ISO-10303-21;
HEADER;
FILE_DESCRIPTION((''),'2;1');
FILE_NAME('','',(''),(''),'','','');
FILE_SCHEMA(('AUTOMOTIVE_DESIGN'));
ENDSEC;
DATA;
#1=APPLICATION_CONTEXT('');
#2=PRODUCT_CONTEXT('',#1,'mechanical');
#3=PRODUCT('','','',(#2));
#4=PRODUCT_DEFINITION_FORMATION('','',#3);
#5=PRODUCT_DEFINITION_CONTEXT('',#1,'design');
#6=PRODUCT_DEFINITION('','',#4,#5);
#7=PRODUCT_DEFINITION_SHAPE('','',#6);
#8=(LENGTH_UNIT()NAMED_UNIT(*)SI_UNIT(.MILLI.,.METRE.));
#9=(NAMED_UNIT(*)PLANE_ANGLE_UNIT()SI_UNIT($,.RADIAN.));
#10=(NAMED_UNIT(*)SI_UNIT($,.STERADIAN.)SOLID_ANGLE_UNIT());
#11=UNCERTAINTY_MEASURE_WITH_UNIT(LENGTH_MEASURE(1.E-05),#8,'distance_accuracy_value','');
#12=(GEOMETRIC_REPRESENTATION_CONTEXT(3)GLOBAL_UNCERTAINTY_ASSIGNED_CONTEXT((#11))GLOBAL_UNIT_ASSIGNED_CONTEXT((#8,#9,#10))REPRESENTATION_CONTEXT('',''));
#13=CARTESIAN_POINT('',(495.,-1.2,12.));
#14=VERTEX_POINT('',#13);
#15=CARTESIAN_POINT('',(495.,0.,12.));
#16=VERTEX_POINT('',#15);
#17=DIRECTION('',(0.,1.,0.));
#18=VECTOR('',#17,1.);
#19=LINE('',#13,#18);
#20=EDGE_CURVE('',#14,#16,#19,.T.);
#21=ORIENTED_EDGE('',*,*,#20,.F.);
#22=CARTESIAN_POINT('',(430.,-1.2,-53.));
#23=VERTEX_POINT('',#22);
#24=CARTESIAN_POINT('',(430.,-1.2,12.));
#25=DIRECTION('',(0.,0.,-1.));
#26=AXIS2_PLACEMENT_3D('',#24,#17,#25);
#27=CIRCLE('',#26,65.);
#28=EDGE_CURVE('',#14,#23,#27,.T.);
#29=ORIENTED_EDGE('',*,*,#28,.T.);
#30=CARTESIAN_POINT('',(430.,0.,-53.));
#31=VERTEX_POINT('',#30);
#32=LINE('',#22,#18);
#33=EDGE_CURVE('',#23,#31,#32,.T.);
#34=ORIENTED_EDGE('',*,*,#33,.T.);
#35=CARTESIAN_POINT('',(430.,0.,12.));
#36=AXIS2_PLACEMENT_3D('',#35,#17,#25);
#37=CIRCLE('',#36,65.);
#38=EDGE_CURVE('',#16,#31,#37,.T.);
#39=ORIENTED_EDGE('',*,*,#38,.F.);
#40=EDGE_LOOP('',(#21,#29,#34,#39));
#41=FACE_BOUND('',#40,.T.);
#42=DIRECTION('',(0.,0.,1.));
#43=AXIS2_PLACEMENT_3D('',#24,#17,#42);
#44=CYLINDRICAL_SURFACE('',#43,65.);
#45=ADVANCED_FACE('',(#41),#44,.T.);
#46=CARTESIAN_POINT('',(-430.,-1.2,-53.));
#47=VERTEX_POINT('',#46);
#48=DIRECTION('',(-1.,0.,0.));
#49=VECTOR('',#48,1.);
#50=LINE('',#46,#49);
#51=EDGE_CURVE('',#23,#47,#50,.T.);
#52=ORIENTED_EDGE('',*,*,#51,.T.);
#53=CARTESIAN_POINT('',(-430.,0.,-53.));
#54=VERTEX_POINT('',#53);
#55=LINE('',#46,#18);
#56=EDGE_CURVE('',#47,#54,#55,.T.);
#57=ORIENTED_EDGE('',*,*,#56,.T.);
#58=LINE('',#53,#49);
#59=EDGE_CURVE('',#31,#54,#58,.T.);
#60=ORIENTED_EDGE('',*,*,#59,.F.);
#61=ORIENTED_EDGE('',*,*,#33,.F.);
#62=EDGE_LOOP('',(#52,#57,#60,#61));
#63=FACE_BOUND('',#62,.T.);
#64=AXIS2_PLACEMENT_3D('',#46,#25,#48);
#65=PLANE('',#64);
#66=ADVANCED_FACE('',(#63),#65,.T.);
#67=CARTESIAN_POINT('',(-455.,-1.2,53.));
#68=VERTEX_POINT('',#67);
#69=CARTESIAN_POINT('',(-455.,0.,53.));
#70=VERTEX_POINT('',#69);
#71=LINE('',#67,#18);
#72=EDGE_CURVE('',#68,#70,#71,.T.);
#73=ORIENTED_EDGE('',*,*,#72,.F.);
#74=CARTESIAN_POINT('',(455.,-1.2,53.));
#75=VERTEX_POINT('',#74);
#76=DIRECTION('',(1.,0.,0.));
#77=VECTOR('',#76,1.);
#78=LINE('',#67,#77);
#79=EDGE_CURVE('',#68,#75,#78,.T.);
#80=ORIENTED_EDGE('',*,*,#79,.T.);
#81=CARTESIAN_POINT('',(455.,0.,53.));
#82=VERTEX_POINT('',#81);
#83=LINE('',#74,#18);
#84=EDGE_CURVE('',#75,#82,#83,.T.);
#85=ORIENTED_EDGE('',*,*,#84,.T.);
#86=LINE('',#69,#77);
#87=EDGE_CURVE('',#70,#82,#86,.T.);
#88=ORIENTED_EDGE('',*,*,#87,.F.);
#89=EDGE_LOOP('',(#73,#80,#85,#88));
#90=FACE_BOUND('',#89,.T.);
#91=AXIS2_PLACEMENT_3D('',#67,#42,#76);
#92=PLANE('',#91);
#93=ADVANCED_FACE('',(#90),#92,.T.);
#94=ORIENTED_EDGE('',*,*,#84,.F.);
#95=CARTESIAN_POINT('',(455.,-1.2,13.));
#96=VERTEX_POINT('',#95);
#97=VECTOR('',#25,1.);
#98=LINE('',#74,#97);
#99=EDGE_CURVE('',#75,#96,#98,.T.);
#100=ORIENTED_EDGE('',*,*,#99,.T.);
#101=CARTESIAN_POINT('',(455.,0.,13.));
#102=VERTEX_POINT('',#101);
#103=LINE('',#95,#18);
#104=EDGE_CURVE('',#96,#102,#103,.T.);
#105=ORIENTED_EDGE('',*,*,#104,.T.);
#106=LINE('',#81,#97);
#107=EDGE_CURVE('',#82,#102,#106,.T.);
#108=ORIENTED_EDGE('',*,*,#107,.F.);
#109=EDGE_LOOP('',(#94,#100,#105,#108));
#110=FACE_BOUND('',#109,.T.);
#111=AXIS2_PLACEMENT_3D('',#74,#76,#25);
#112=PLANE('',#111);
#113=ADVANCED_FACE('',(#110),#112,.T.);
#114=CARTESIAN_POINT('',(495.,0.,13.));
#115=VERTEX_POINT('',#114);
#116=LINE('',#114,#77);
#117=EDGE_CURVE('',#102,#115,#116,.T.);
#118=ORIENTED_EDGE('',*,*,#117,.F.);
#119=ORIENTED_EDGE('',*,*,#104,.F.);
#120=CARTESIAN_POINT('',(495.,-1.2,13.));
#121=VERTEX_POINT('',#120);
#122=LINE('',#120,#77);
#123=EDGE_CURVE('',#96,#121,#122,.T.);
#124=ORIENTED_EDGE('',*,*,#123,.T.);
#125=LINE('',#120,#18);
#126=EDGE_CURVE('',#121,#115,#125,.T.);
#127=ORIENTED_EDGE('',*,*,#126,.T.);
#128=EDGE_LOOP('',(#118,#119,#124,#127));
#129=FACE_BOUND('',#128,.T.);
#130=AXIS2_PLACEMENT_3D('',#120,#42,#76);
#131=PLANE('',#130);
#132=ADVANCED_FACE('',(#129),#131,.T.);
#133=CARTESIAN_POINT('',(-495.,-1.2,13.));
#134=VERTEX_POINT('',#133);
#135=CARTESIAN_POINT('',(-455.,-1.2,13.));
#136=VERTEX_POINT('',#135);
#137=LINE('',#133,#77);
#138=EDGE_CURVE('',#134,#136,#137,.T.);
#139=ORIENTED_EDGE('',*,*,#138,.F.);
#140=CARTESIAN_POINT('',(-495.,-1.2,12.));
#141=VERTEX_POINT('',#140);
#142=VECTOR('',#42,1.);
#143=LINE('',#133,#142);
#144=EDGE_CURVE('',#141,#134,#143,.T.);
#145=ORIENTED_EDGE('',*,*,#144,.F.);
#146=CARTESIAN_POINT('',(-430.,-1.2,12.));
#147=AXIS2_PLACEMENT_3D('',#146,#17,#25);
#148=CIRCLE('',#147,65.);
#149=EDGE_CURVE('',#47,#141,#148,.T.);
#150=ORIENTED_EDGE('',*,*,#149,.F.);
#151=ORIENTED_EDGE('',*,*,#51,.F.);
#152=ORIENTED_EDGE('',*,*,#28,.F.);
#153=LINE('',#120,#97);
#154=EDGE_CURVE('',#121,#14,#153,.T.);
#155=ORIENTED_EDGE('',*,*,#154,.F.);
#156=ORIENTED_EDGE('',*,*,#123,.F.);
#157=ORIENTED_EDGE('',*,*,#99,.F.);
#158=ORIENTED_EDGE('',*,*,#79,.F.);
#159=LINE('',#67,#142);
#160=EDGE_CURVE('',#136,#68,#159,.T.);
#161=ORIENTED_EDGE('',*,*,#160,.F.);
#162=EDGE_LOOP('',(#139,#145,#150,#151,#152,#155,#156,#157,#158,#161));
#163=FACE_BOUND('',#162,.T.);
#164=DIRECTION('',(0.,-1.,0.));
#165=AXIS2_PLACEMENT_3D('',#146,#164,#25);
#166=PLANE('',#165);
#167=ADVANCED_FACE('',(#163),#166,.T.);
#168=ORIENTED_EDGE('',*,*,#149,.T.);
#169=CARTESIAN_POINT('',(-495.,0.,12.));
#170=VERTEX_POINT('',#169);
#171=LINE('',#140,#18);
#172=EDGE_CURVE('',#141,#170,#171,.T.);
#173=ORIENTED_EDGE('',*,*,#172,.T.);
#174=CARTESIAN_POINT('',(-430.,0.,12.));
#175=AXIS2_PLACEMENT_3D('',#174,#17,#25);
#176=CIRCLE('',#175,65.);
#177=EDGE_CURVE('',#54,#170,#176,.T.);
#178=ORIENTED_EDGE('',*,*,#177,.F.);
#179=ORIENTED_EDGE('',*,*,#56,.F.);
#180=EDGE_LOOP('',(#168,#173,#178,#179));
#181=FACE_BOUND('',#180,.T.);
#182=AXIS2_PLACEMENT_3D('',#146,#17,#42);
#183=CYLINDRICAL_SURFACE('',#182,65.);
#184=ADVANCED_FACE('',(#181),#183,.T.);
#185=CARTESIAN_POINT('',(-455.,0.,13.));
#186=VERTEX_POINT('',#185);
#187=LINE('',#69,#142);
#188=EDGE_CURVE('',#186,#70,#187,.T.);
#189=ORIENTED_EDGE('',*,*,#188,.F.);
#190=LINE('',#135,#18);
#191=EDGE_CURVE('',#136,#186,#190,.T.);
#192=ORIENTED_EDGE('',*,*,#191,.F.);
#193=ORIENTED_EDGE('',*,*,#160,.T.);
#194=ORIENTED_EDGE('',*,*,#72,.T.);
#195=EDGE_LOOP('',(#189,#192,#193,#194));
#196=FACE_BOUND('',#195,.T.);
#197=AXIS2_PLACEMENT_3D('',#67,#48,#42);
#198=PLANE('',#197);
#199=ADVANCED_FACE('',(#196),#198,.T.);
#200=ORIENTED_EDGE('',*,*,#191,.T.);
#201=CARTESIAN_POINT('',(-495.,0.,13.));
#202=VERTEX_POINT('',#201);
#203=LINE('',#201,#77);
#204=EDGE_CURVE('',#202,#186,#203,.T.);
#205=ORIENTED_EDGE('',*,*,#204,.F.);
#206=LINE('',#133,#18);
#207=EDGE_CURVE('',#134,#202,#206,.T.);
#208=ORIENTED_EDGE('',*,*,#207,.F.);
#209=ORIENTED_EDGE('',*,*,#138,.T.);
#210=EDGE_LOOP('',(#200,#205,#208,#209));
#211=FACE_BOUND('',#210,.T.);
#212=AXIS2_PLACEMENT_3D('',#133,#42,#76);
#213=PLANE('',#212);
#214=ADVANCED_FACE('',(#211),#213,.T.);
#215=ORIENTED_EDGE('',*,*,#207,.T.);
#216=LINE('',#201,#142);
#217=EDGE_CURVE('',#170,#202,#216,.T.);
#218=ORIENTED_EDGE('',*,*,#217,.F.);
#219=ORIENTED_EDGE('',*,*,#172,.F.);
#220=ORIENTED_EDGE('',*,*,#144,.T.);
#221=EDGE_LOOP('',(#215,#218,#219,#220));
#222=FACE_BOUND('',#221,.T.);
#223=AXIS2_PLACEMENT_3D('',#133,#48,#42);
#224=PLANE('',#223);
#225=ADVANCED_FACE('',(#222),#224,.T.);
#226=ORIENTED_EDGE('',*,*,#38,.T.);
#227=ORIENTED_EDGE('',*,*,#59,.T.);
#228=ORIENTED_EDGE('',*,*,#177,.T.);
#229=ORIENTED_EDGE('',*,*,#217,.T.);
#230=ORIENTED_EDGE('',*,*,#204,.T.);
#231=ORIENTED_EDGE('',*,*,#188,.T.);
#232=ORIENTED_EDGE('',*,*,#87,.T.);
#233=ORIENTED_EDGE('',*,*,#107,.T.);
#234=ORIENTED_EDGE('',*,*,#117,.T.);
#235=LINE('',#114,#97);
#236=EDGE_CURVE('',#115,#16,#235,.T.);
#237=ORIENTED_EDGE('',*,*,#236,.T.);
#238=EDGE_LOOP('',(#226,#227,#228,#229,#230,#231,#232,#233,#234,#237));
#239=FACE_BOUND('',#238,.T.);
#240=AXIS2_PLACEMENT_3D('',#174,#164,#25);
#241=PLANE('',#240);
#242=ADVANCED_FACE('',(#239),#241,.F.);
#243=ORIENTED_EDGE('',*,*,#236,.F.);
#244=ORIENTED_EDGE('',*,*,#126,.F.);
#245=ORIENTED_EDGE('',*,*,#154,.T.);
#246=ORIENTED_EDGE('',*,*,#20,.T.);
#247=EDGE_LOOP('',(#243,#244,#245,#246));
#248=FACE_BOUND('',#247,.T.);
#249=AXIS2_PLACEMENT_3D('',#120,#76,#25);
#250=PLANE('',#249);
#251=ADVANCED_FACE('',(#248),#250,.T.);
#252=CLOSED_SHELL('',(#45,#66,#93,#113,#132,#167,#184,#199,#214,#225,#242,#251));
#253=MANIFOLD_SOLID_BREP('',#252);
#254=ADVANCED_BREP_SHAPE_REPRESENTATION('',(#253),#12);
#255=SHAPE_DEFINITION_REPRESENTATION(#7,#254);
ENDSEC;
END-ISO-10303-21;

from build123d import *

# Parameters (mm, degrees)
BASE_FLANGE1_DEPTH = 1.2


# Sheet-metal steps are written as plain solids
with BuildPart() as part:
    # Sketch1 → Base-Flange1 (new body)
    with BuildSketch(Plane(origin=(0, 0, 0), x_dir=(1, 0, 0), z_dir=(0, 1, 0))):
        with BuildLine():
            Line((-455, -53), (455, -53))
            Line((455, -53), (455, -13))
            Line((455, -13), (495, -13))
            Line((495, -13), (495, -12))
            ThreePointArc((495, -12), (475.961940777, 33.961940777), (430, 53))
            Line((430, 53), (-430, 53))
            ThreePointArc((-430, 53), (-475.961940777, 33.961940777), (-495, -12))
            Line((-495, -12), (-495, -13))
            Line((-495, -13), (-455, -13))
            Line((-455, -13), (-455, -53))
        make_face()
    extrude(amount=-BASE_FLANGE1_DEPTH)


solid = part.part
